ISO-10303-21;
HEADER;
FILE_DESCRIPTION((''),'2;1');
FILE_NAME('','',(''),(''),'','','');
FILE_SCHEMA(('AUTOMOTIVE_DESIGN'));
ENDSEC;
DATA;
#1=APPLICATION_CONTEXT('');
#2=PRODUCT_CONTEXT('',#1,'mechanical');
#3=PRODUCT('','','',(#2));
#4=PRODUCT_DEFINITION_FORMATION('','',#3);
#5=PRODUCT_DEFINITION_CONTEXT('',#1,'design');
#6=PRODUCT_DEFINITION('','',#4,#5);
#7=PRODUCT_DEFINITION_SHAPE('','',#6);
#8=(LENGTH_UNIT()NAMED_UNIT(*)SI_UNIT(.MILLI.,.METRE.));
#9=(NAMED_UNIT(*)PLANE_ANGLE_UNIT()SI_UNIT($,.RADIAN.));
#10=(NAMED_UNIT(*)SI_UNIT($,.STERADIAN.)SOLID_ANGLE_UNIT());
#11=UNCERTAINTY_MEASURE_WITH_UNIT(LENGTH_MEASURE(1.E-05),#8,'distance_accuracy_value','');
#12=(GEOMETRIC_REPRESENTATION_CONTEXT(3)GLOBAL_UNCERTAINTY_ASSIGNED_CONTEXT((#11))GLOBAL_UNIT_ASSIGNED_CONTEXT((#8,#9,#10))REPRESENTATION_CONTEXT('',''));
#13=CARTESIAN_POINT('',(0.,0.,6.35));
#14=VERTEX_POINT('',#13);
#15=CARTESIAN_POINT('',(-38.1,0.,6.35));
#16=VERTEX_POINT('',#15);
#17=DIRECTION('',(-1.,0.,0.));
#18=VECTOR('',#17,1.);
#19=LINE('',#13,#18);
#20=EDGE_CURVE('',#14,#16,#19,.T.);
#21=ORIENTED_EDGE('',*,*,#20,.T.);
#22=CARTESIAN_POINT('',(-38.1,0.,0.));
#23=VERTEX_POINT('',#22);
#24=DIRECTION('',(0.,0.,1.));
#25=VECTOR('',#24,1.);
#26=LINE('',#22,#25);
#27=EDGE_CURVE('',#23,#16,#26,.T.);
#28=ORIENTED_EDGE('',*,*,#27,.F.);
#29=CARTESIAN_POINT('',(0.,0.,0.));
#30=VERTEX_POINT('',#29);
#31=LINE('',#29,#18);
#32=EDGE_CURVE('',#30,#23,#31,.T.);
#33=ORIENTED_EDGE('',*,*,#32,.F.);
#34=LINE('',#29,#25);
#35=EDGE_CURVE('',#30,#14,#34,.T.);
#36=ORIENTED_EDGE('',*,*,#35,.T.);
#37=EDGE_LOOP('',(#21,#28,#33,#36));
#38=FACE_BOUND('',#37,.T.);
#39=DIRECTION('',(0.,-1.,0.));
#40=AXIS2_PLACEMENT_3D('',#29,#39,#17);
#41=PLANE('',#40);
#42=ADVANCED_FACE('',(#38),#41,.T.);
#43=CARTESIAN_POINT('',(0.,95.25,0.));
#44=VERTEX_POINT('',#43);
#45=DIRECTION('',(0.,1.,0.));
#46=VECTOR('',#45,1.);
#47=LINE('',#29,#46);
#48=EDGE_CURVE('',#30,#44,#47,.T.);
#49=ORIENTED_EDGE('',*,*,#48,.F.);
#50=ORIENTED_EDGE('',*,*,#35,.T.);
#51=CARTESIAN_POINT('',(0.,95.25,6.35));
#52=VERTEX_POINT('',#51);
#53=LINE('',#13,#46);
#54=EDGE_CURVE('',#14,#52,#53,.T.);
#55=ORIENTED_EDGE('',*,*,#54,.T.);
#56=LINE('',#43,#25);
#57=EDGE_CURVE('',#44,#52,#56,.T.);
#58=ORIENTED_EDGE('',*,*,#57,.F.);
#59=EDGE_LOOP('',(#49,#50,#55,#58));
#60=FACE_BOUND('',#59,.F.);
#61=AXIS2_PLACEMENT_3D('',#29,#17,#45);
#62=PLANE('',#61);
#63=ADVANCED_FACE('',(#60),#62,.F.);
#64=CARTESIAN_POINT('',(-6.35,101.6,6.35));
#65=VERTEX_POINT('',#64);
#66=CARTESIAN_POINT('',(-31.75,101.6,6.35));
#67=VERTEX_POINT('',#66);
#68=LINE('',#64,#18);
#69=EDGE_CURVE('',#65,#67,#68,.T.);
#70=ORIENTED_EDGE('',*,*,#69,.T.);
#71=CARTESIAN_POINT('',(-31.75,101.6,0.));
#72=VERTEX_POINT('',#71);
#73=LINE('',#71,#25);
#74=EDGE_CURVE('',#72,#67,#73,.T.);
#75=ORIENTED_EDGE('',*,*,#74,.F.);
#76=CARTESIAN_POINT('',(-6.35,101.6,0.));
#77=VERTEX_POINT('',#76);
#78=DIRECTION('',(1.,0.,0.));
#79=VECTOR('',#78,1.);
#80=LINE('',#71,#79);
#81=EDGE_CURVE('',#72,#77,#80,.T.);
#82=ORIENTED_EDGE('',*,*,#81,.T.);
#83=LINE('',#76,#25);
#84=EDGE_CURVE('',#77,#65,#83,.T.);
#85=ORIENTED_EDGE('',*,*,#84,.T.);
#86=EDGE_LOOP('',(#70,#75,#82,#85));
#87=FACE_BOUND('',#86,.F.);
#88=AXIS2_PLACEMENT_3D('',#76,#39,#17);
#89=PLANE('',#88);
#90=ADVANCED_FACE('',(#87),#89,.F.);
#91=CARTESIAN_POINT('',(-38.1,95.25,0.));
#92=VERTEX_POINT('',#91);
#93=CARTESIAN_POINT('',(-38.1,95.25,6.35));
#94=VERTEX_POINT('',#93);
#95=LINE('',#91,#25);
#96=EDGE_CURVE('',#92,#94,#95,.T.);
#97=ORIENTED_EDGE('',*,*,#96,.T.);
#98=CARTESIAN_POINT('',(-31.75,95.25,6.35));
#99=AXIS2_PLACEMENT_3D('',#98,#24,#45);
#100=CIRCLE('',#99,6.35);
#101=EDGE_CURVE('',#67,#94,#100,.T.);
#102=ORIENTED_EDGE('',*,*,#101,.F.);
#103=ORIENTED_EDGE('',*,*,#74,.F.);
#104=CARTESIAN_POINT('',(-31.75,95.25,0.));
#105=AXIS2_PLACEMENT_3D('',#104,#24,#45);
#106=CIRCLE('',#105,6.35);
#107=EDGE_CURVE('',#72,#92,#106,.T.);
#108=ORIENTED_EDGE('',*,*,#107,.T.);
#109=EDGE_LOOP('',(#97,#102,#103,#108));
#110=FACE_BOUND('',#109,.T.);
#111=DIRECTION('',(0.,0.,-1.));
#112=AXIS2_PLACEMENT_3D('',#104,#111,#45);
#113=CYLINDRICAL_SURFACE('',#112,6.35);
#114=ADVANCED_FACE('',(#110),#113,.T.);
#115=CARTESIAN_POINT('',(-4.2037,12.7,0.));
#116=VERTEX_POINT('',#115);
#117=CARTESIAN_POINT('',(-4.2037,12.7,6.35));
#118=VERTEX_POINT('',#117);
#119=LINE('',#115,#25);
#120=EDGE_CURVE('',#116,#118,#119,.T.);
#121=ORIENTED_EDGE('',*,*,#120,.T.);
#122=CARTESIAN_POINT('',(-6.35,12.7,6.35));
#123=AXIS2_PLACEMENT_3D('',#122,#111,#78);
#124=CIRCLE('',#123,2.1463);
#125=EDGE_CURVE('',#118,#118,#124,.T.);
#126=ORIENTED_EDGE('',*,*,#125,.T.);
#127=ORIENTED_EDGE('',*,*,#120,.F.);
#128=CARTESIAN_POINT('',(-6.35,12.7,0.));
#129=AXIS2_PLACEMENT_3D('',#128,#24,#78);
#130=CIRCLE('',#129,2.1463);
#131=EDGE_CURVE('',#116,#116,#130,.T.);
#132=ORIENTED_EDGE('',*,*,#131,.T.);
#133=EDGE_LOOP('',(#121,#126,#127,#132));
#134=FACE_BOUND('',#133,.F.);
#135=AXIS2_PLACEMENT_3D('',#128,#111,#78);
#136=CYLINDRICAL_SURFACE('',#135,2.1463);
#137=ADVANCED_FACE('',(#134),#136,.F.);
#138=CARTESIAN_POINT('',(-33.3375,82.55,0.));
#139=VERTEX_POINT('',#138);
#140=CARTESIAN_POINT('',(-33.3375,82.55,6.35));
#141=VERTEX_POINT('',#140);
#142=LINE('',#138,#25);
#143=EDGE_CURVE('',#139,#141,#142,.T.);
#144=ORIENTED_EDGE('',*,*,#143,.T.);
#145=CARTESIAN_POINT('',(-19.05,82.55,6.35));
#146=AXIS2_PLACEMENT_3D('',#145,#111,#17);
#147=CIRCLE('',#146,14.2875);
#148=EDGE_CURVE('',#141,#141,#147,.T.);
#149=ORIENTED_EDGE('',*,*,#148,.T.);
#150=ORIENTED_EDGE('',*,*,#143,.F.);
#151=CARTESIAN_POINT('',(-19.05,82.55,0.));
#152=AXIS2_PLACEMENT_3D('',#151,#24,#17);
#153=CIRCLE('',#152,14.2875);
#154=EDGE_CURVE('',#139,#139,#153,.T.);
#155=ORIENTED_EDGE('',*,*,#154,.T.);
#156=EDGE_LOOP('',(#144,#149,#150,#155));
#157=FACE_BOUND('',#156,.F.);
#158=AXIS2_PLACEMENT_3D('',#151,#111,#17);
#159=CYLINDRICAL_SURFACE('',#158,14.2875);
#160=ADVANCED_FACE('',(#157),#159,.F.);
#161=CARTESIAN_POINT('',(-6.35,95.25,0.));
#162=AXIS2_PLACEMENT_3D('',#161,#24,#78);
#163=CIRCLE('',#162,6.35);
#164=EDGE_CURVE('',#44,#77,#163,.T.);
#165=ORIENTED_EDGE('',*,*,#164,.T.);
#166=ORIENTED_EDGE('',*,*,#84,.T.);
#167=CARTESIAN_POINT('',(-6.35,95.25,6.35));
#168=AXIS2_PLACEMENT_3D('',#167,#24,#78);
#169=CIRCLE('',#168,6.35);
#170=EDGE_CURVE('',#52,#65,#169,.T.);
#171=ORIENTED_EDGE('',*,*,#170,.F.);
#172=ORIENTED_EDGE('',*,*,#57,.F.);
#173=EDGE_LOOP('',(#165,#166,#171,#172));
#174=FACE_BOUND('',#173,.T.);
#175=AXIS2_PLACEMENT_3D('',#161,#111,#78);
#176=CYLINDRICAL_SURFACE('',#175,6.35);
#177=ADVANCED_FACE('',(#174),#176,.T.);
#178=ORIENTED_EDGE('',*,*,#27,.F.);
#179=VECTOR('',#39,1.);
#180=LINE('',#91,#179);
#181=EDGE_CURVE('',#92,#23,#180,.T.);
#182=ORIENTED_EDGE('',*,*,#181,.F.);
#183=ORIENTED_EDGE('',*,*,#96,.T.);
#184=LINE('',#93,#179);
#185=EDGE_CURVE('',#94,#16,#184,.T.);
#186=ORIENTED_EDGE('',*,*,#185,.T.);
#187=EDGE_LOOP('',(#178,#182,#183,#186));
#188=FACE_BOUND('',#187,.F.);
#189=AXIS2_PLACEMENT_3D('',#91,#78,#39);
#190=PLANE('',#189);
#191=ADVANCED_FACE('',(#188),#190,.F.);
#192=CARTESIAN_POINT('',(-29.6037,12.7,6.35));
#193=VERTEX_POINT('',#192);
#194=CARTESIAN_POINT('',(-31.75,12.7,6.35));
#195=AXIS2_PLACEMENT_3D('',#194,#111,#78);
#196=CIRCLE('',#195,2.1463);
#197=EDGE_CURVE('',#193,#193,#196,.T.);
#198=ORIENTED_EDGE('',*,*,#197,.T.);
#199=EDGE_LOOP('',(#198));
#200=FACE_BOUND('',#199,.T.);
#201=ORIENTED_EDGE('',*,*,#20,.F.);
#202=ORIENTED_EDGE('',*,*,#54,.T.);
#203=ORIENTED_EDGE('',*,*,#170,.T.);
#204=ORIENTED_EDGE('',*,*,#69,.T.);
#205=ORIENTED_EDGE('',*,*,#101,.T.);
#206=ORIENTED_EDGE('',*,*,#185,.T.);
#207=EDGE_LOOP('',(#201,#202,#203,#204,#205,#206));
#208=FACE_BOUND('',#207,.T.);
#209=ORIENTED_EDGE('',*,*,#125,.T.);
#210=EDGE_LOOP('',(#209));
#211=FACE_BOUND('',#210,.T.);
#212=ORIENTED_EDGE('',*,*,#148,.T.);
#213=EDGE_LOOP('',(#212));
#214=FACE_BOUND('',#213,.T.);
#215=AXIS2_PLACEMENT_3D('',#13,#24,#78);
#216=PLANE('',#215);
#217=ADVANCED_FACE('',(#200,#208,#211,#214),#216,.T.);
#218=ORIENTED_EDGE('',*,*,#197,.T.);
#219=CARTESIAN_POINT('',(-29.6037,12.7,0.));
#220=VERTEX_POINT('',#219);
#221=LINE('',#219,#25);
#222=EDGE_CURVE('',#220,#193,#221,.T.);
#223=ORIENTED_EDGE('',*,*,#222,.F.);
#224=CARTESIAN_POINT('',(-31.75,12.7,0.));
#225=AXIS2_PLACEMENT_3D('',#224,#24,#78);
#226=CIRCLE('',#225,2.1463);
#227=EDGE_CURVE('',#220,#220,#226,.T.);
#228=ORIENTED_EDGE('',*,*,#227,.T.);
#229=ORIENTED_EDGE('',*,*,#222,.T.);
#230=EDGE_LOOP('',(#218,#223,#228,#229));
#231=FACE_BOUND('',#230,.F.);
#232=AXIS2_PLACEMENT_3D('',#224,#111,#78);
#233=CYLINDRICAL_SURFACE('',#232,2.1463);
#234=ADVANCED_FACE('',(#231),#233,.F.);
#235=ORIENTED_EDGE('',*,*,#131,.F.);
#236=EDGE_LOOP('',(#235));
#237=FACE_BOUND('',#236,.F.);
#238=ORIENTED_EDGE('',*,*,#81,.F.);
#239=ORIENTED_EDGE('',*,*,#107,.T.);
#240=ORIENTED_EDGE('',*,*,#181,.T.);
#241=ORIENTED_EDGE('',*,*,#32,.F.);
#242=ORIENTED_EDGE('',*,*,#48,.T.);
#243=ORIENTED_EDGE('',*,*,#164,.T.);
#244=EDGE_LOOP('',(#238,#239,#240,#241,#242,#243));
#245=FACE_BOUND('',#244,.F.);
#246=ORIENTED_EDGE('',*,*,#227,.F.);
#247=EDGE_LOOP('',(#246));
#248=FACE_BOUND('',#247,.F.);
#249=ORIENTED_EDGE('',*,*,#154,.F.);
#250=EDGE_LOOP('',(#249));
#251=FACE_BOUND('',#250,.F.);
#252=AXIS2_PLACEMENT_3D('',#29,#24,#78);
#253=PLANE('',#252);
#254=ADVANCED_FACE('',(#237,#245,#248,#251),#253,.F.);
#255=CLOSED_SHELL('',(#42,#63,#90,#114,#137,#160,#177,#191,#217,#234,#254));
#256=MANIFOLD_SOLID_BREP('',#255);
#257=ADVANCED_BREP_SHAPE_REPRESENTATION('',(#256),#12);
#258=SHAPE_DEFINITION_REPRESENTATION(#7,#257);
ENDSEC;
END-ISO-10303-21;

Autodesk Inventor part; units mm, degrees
ref_plane "YZ Plane" through (0, 0, 0) normal (1, 0, 0) x (0, 1, 0)
ref_plane "XZ Plane" through (0, 0, 0) normal (0, 1, 0) x (-1, 0, 0)
ref_plane "XY Plane" through (0, 0, 0) normal (0, 0, 1) x (1, 0, 0)
sketch "Sketch1" plane through (0, 0, 0) normal (0, 0, 1) x (1, 0, 0)
  line L0 (0, 0) -> (-38.1, 0)
  line L1 (0, 0) -> (0, 95.25)
  line L2 (-6.35, 101.6) -> (-38.1, 101.6)
  line L3 (-38.1, 95.25) -> (-38.1, 0)
  line L4 (-31.75, 101.6) -> (-31.75, 101.6)
  line L5 (-31.75, 101.6) -> (-31.75, 12.7)
  line L6 (0, 101.6) -> (-6.35, 101.6)
  line L7 (-6.35, 101.6) -> (-6.35, 12.7)
  circle A0 centre (-31.75, 12.7) radius 2.1463
  circle A1 centre (-6.35, 12.7) radius 2.1463
  arc A2 (-31.75, 101.6) -> (-38.1, 95.25) centre (-31.75, 95.25) ccw
  arc A3 (0, 95.25) -> (-6.35, 101.6) centre (-6.35, 95.25) ccw
  line L8 (-22.225, 101.6) -> (-22.225, 76.2)
  dimension "d0" = 38.1
  dimension "d1" = 101.6
  dimension "d2" = 6.35
  dimension "d3" = 88.9
  dimension "d4" = 6.35
  dimension "d5" = 4.2926
  dimension "d6" = 4.2926
  dimension "d7" = 88.9
  dimension "d19" = 6.35
  dimension "d20" = 6.35
  dimension "d23" = 25.4
extrude "Plate1" add sketch "Sketch1" along normal blind 6.35
sketch "Sketch4" plane through (0, 0, 0) normal (0, 0, -1) x (-1, 0, 0)
  line L0 (6.35, 101.6) -> (31.75, 101.6) projected
  line L1 (19.05, 101.6) -> (19.05, 82.55)
  circle A0 centre (19.05, 82.55) radius 14.2875
  dimension "d25" = 19.05
  dimension "d26" = 28.575
extrude "Cut1" cut sketch "Sketch4" against normal blind 6.35
equation "\"d27\" = Thickness"
equation "\"BendRadius\" = Thickness"
equation "\"BendReliefWidth\" = Thickness"
equation "\"BendReliefDepth\" = 0.5 * Thickness"
equation "\"CornerReliefSize\" = 4 * Thickness"
equation "\"MinimumRemnant\" = 2 * Thickness"
equation "\"TransitionRadius\" = BendRadius"
equation "\"JacobiRadiusSize\" = BendRadius"
equation "\"GapSize\" = Thickness"
equation "\"d8\" = BendRadius"
equation "\"Thickness\" = 6.35"
properties part number "arm mount"
